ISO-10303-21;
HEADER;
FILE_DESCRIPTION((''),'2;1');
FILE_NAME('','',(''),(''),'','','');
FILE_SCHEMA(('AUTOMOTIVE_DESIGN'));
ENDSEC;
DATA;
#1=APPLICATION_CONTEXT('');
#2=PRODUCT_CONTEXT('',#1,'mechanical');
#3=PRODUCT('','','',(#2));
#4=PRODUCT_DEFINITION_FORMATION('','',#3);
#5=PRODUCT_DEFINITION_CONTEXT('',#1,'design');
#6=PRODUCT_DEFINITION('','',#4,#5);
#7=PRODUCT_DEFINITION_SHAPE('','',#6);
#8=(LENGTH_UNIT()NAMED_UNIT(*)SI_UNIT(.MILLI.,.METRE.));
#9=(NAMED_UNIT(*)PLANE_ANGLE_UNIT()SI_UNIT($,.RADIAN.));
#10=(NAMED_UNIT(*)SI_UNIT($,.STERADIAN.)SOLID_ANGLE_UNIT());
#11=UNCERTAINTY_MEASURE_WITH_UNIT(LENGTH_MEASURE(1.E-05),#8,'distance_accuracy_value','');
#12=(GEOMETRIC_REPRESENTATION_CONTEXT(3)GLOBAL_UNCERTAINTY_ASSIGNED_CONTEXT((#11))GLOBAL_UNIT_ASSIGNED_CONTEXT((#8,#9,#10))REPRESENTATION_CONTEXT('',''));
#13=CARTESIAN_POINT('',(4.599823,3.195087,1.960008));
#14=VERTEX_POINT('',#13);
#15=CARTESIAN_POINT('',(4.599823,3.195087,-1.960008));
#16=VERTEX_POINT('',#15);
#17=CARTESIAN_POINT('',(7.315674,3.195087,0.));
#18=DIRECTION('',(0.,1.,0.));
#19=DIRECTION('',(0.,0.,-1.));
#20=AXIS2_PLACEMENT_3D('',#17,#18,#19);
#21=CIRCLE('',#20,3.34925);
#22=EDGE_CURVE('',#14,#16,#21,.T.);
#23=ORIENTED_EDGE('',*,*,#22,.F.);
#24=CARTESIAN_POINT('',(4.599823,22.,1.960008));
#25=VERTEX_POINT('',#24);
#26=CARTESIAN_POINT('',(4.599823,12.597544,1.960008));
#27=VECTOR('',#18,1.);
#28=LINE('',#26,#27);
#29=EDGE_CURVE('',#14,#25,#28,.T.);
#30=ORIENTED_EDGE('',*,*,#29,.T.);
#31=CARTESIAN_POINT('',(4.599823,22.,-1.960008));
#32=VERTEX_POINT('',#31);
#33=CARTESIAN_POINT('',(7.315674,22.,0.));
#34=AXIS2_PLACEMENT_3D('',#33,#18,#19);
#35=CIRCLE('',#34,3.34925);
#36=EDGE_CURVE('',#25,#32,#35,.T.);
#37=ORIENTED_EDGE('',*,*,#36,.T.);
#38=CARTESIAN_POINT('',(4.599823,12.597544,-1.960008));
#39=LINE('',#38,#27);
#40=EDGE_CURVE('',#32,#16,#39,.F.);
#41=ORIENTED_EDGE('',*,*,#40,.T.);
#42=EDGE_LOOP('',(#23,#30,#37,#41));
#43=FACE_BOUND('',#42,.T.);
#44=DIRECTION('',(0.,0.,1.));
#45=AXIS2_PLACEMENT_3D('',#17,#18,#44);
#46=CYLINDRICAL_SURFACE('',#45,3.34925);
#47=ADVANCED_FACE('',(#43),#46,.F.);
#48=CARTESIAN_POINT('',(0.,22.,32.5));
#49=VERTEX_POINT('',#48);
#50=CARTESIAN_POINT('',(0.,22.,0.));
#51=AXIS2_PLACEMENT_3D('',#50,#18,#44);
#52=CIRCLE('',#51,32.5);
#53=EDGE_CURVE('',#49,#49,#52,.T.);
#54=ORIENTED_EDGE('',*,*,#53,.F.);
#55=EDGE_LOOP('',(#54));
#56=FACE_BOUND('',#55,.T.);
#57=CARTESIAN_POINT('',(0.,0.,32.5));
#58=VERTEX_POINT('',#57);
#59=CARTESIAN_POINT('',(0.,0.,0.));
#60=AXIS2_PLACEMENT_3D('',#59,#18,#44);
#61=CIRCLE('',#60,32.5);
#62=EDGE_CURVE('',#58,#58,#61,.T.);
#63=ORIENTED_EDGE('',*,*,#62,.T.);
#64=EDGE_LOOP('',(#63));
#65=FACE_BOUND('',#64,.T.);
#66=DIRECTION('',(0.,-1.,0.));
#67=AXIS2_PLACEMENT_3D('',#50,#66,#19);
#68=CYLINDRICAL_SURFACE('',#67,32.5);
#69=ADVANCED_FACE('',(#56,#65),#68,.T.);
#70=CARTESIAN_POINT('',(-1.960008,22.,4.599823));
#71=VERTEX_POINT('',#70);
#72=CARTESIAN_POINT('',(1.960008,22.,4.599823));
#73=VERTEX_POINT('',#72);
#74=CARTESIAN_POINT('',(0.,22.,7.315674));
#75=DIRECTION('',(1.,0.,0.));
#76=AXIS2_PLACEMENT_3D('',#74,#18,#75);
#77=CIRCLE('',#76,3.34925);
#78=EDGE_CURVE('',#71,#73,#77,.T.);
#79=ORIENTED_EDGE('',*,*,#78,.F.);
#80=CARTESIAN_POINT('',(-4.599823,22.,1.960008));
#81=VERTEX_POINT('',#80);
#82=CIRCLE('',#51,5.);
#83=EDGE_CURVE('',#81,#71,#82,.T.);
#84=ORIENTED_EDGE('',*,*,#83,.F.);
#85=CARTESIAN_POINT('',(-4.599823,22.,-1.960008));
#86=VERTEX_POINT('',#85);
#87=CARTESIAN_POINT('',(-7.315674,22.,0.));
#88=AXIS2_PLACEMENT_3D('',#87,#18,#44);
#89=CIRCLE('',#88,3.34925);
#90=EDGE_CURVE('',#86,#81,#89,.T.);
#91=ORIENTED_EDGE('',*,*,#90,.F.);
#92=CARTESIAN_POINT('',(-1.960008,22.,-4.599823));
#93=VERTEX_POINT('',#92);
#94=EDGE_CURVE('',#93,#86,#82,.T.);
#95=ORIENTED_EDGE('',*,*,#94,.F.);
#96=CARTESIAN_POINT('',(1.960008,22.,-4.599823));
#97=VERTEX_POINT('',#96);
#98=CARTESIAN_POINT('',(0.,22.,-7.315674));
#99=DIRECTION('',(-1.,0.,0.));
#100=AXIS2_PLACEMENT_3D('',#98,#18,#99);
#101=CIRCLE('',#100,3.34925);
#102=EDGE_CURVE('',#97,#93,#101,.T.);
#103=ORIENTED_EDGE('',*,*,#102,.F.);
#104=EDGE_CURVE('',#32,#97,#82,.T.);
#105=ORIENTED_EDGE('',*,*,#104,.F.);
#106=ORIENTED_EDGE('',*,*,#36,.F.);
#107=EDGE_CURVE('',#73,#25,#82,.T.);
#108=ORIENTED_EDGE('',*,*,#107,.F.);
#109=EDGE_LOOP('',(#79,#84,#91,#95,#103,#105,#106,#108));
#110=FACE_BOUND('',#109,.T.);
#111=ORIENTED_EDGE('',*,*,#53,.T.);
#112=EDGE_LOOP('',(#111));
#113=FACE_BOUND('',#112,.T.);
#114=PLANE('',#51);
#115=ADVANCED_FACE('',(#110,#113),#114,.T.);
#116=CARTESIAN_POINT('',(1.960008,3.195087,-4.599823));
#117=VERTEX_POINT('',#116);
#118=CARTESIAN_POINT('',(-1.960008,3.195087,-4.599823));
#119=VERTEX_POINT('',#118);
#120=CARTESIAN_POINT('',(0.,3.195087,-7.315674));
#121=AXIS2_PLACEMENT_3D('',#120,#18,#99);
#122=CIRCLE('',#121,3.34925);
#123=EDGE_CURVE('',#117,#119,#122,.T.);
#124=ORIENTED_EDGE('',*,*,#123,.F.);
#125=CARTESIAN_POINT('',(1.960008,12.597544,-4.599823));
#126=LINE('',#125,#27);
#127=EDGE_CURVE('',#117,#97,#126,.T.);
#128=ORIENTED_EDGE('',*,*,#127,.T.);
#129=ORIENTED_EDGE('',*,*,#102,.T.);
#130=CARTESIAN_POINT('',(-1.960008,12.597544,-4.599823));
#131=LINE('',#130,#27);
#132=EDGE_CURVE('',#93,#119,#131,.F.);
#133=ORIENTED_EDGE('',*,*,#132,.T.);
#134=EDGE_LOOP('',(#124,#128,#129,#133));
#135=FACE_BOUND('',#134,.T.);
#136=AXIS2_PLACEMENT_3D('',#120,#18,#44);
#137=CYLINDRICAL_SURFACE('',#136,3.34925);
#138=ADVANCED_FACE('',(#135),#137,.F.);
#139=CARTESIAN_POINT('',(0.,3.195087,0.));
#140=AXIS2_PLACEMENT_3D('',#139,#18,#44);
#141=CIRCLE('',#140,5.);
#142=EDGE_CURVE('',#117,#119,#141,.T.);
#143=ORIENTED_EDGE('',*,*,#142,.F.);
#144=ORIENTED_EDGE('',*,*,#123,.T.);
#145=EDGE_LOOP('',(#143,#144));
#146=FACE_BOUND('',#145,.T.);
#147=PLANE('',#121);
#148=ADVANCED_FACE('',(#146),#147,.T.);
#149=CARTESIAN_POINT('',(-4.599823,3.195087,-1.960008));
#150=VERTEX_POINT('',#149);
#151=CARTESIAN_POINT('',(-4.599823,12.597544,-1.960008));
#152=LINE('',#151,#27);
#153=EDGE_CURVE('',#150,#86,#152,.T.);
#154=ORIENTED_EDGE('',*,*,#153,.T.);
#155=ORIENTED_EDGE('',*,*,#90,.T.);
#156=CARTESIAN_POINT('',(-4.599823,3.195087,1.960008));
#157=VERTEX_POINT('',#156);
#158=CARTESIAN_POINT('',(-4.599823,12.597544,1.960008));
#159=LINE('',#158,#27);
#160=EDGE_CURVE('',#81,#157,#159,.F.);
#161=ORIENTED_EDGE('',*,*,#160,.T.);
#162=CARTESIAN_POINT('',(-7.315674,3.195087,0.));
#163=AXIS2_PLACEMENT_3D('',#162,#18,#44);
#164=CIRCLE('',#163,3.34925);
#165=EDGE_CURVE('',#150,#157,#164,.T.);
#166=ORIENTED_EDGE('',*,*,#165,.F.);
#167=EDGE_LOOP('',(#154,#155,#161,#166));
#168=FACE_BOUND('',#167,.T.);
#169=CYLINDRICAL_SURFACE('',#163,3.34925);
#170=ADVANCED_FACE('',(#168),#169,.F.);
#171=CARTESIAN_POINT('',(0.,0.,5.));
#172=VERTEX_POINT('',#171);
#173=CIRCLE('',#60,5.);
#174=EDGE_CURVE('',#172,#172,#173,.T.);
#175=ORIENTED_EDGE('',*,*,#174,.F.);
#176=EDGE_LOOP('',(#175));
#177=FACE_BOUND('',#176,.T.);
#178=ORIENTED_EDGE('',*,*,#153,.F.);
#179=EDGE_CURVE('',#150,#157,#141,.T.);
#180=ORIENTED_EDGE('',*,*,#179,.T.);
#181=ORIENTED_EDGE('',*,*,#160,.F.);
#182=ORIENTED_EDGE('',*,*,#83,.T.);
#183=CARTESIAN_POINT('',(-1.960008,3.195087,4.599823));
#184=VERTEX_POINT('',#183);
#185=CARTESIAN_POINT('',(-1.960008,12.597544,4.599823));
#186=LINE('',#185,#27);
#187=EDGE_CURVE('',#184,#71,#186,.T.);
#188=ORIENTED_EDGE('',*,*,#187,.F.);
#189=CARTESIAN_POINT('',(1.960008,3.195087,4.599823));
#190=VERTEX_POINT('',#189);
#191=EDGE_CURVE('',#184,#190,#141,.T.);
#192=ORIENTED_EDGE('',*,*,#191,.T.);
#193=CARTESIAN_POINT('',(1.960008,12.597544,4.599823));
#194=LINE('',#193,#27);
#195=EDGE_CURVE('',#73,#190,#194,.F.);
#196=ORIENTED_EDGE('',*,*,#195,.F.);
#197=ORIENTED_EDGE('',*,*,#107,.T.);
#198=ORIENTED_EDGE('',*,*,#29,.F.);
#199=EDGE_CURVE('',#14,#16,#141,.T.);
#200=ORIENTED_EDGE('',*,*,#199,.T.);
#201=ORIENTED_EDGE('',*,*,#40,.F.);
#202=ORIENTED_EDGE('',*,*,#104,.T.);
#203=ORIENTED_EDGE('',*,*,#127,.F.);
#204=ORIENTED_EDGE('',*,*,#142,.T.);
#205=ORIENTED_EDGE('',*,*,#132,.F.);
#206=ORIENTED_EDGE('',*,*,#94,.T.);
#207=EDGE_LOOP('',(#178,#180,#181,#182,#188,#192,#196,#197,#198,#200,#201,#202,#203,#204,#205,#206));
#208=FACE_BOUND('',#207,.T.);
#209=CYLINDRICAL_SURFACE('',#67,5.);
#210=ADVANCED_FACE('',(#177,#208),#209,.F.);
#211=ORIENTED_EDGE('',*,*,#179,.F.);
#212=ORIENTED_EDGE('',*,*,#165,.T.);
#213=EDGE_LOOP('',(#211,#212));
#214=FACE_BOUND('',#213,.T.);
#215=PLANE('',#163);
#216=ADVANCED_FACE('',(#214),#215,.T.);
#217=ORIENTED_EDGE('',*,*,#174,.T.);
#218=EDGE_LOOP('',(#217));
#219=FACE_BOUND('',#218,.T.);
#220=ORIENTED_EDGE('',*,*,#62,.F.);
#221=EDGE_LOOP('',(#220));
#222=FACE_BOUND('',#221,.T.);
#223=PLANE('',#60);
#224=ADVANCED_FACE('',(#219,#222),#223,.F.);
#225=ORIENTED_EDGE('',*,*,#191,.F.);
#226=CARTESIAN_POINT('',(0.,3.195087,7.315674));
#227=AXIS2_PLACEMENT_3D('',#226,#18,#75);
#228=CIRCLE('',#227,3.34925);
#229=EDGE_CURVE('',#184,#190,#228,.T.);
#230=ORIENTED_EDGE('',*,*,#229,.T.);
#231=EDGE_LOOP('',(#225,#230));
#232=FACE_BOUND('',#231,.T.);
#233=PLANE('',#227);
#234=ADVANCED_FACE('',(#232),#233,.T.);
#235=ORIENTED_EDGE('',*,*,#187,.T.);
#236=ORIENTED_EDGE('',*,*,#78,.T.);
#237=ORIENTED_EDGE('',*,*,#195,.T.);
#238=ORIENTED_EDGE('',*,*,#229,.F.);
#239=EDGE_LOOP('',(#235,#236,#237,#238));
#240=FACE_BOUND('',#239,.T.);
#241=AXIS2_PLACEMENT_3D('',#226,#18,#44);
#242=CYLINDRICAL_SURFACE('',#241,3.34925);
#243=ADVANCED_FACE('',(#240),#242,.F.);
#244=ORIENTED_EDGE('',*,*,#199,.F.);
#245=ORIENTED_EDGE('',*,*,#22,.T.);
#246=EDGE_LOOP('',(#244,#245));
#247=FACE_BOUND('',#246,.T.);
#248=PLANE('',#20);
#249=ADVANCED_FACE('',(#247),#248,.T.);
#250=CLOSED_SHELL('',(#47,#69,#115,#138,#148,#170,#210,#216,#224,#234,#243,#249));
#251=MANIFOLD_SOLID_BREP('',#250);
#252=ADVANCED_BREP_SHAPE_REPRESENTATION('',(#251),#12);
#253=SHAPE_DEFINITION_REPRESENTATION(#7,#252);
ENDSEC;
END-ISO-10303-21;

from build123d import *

# Parameters (mm, degrees)
SKETCH1_R           = 32.5
BOSS_EXTRUDE1_DEPTH = 22
SKETCH2_R           = 5
CUT_EXTRUDE1_DEPTH  = 51.955863254
SKETCH3_R           = 3.349250155
CUT_EXTRUDE2_DEPTH  = 18.804912895
CIRPATTERN1_COUNT   = 4


with BuildPart() as part:
    # Sketch1 → Boss-Extrude1 (new body)
    with BuildSketch(Plane(origin=(0, 0, 0), x_dir=(1, 0, 0), z_dir=(0, 1, 0))):
        Circle(SKETCH1_R)
    extrude(amount=BOSS_EXTRUDE1_DEPTH)

    # Sketch2 → Cut-Extrude1 (cut, through all)
    with BuildSketch(Plane(origin=(0, 0, 0), x_dir=(1, 0, 0), z_dir=(0, 1, 0))):
        Circle(SKETCH2_R)
    extrude(amount=CUT_EXTRUDE1_DEPTH, mode=Mode.SUBTRACT)

    # Sketch3 → Cut-Extrude2 (cut)
    with BuildSketch(Plane(origin=(0, 22, 0), x_dir=(1, 0, 0), z_dir=(0, 1, 0))):
        with Locations((-7.315673523, 0)):
            Circle(SKETCH3_R)
    cut_extrude2 = extrude(amount=-CUT_EXTRUDE2_DEPTH, mode=Mode.SUBTRACT)

    # CirPattern1: Cut-Extrude2 ×4 about axis
    cirpattern1_axis = Axis((0, 0, 0), (0, 1, 0))
    for i in range(1, CIRPATTERN1_COUNT):
        add(cut_extrude2.rotate(cirpattern1_axis, i * 360 / CIRPATTERN1_COUNT), mode=Mode.SUBTRACT)


solid = part.part
